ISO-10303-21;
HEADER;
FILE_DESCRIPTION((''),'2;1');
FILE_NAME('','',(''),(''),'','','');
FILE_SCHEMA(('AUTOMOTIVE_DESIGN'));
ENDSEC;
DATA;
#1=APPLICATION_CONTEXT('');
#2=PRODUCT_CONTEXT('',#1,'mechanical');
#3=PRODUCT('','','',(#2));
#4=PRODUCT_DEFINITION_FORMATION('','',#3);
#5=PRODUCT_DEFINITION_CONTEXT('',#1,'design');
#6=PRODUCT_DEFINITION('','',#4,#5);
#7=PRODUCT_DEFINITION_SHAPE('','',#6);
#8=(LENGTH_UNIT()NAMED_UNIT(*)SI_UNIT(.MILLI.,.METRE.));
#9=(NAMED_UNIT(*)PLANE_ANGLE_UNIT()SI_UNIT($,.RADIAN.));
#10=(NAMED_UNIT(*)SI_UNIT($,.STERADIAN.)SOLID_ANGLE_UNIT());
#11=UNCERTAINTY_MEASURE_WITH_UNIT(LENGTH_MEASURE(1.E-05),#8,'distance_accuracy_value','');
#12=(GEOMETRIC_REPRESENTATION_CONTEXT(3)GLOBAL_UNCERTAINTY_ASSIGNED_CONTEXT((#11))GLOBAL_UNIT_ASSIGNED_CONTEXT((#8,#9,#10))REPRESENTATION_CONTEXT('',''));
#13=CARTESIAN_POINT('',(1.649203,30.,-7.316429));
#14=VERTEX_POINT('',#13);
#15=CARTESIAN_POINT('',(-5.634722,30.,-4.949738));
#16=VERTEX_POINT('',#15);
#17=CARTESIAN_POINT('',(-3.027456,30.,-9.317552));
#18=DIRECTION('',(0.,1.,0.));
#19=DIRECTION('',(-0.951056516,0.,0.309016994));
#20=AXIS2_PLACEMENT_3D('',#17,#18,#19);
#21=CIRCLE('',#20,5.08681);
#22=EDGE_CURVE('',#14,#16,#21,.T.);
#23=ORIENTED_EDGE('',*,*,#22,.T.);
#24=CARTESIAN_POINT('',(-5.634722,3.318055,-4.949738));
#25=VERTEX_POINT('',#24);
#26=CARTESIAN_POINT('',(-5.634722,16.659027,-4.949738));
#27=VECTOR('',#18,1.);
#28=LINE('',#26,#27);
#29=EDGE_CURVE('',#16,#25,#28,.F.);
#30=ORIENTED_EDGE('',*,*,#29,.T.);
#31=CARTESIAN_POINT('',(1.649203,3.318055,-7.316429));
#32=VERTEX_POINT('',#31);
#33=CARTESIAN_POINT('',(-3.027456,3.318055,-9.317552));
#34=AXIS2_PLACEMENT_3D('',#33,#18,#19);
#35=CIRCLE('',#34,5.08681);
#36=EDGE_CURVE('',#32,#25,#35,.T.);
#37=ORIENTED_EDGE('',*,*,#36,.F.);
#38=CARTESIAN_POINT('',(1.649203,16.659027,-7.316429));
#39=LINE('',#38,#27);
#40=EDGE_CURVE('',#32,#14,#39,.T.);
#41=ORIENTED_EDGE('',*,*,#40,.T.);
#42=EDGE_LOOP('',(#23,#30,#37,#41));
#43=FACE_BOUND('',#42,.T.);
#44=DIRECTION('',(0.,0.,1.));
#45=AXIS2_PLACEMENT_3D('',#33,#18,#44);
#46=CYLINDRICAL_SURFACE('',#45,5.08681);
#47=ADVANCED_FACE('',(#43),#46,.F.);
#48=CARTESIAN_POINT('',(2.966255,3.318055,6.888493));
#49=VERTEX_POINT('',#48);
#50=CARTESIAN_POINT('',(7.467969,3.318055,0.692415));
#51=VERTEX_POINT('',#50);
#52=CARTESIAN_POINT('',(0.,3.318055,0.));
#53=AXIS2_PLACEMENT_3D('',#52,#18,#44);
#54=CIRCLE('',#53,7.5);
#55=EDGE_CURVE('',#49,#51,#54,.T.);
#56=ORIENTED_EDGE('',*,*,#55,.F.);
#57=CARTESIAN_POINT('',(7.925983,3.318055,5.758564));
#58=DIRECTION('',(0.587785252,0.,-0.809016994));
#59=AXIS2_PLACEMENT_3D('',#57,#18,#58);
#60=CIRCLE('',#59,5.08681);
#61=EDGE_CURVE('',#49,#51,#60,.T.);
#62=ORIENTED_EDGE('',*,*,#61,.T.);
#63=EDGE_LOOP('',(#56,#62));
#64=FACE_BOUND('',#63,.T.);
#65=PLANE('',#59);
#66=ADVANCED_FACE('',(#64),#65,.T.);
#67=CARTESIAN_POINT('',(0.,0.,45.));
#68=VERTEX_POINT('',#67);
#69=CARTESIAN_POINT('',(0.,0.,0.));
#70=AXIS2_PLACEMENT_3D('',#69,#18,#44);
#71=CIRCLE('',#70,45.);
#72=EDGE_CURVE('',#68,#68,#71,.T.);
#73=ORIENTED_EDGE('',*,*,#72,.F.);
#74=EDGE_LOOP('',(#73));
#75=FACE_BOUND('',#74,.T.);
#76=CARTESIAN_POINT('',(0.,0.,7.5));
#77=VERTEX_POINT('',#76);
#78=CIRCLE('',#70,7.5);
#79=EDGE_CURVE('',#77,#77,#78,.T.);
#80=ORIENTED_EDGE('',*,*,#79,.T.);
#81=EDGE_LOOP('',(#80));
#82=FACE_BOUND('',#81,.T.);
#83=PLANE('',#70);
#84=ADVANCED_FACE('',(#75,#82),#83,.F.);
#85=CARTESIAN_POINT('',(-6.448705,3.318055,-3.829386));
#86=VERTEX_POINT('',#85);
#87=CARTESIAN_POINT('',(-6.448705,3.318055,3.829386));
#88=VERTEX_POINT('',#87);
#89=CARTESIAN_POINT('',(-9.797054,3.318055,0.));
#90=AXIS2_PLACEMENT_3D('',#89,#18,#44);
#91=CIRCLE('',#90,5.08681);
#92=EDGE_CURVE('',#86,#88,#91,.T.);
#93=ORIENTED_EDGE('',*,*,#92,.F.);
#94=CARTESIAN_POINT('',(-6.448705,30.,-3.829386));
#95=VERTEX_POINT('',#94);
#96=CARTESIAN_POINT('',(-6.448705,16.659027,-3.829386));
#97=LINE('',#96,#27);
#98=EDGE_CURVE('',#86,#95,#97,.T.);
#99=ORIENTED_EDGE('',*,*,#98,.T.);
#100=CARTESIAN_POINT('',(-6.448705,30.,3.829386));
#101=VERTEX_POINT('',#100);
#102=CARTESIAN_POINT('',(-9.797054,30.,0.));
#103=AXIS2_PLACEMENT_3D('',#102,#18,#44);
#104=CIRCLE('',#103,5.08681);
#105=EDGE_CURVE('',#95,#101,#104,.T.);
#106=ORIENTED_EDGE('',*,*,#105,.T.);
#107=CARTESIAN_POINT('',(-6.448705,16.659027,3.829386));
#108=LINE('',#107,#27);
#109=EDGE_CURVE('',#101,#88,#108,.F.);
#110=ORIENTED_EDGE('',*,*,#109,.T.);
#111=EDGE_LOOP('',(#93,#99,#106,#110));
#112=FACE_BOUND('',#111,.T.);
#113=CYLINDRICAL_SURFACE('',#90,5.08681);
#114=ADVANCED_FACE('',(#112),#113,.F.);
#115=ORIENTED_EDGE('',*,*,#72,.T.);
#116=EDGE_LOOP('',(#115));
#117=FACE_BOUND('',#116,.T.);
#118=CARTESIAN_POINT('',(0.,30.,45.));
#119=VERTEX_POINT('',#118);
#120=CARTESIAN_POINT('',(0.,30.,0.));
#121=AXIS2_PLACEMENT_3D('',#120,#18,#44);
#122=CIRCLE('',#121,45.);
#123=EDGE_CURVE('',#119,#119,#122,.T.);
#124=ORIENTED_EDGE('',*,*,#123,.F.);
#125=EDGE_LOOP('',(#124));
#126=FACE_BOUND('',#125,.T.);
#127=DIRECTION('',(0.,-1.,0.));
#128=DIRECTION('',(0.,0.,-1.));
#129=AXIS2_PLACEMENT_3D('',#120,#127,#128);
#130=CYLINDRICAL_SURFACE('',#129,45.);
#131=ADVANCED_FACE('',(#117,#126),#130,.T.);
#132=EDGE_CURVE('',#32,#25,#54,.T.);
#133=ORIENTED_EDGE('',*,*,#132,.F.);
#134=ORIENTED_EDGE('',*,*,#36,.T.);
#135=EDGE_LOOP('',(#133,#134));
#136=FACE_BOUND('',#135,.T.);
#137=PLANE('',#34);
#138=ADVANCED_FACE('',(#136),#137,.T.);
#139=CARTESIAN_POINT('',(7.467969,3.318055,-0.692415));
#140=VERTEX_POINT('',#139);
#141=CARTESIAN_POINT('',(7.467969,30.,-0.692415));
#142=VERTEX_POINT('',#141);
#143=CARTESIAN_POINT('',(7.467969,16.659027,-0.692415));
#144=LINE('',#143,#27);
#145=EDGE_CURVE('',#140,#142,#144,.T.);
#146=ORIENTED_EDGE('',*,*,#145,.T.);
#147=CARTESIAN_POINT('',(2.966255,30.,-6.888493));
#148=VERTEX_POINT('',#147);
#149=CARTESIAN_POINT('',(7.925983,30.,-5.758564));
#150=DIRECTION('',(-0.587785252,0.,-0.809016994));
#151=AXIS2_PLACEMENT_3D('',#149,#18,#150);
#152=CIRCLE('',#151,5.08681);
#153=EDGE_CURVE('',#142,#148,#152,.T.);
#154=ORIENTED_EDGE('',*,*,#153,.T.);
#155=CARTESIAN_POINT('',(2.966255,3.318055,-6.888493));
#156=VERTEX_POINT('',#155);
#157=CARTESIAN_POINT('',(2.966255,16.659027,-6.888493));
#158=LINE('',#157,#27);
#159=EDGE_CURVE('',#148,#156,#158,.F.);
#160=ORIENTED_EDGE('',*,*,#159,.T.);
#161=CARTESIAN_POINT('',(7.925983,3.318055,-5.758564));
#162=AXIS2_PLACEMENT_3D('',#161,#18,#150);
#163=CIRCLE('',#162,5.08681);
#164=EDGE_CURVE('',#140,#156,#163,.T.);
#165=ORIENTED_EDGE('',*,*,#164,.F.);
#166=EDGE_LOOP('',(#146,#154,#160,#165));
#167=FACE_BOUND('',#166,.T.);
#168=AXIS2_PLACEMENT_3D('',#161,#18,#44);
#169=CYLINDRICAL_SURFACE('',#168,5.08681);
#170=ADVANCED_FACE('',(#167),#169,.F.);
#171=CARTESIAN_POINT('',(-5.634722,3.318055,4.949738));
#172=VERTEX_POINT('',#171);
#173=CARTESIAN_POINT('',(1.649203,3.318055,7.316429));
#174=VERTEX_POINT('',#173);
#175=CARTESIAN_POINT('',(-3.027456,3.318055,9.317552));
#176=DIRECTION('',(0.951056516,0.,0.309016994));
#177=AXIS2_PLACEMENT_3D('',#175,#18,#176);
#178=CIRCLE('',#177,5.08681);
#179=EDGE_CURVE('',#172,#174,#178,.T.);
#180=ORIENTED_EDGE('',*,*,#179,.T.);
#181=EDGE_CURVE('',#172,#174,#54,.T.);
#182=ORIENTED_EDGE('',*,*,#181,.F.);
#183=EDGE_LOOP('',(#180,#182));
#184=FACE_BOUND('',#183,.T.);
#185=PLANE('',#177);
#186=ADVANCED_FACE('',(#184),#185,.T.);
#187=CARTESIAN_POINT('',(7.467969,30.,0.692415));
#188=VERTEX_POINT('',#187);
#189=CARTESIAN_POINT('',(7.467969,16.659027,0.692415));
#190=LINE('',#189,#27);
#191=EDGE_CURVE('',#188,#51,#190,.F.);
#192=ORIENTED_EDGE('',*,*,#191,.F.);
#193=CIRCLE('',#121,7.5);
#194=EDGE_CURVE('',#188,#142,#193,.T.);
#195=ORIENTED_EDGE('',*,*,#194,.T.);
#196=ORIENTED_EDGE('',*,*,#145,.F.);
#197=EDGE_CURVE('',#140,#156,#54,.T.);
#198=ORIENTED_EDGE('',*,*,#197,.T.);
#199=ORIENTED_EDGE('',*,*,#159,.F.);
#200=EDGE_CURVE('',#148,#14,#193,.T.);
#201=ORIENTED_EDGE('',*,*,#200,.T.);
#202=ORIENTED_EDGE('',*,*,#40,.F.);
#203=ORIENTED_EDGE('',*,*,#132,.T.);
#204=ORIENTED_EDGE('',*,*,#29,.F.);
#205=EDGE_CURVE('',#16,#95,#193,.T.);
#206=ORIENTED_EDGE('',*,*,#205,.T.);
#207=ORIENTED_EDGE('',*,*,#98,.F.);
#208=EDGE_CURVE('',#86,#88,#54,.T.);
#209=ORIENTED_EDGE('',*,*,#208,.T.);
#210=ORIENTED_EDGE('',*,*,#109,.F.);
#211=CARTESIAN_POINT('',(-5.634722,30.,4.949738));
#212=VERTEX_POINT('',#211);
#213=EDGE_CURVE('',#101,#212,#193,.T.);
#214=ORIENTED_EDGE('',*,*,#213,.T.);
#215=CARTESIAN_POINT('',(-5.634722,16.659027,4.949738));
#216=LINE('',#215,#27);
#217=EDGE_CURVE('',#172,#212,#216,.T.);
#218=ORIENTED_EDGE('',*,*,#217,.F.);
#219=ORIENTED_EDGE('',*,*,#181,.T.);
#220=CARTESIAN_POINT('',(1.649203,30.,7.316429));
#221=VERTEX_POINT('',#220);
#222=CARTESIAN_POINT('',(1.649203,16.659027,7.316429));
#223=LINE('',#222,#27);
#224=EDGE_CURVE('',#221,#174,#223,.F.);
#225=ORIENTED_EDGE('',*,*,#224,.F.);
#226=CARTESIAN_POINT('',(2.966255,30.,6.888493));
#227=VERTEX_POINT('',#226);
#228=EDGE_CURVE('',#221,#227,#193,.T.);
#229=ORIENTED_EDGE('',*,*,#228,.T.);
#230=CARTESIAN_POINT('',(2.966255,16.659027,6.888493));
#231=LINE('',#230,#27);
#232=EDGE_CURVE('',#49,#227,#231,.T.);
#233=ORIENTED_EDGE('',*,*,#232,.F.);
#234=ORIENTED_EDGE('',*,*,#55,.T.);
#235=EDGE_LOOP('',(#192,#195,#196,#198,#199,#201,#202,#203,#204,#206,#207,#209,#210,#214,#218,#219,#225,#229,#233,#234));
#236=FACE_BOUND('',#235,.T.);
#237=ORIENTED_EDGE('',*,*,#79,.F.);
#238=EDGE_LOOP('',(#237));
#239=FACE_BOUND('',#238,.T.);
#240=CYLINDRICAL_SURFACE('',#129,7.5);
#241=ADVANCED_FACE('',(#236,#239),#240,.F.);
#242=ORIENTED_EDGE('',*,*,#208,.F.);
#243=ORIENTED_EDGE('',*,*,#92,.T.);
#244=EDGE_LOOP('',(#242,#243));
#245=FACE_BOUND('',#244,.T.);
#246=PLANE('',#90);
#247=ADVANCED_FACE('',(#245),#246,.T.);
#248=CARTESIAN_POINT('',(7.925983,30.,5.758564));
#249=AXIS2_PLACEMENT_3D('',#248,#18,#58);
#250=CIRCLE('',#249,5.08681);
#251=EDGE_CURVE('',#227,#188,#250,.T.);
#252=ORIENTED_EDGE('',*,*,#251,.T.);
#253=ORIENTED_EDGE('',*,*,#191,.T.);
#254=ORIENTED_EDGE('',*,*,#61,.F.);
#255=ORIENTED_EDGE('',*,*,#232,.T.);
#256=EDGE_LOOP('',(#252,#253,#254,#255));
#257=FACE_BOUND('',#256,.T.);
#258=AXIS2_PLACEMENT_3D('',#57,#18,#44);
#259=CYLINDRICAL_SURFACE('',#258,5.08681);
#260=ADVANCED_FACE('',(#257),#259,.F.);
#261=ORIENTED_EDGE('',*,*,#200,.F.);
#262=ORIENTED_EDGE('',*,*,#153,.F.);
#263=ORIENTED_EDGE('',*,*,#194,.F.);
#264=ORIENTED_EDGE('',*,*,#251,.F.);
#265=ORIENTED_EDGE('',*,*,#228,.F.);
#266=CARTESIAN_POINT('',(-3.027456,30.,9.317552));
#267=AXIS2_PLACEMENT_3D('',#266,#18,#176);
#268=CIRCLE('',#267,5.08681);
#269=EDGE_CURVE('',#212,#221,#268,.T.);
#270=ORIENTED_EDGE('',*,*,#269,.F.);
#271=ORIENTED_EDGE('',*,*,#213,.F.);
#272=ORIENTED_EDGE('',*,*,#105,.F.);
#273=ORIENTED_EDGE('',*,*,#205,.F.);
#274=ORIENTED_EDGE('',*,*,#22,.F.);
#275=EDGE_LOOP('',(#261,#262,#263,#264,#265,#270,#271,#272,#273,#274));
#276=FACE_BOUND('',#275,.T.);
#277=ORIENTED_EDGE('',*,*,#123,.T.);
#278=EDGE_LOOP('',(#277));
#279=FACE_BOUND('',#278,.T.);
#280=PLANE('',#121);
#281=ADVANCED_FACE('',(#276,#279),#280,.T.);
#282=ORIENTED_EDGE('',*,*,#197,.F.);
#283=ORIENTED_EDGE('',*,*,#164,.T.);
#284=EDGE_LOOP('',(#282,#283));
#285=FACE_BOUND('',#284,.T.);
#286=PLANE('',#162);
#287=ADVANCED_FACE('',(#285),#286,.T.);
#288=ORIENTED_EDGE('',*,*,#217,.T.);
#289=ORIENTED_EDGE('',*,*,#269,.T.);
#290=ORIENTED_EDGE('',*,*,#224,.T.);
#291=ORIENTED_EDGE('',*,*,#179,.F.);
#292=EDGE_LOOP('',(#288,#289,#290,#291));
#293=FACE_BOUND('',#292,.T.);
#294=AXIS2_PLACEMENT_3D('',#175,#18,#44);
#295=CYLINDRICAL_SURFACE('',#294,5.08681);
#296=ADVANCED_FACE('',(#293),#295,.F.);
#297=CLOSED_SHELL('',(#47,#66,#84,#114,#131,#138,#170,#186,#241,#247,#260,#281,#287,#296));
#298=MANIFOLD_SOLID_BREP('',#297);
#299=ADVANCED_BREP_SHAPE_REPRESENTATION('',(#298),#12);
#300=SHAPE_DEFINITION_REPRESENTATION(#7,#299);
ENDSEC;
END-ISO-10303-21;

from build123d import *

# Parameters (mm, degrees)
SKETCH1_R           = 45
BOSS_EXTRUDE1_DEPTH = 30
SKETCH2_R           = 7.5
CUT_EXTRUDE1_DEPTH  = 71.356236397
SKETCH3_R           = 5.086810486
CUT_EXTRUDE2_DEPTH  = 26.681945259
CIRPATTERN1_COUNT   = 5


with BuildPart() as part:
    # Sketch1 → Boss-Extrude1 (new body)
    with BuildSketch(Plane(origin=(0, 0, 0), x_dir=(1, 0, 0), z_dir=(0, 1, 0))):
        Circle(SKETCH1_R)
    extrude(amount=BOSS_EXTRUDE1_DEPTH)

    # Sketch2 → Cut-Extrude1 (cut, through all)
    with BuildSketch(Plane(origin=(0, 0, 0), x_dir=(1, 0, 0), z_dir=(0, 1, 0))):
        Circle(SKETCH2_R)
    extrude(amount=CUT_EXTRUDE1_DEPTH, mode=Mode.SUBTRACT)

    # Sketch3 → Cut-Extrude2 (cut)
    with BuildSketch(Plane(origin=(0, 30, 0), x_dir=(1, 0, 0), z_dir=(0, 1, 0))):
        with Locations((-9.797054354, 0)):
            Circle(SKETCH3_R)
    cut_extrude2 = extrude(amount=-CUT_EXTRUDE2_DEPTH, mode=Mode.SUBTRACT)

    # CirPattern1: Cut-Extrude2 ×5 about axis
    cirpattern1_axis = Axis((0, 0, 0), (0, 1, 0))
    for i in range(1, CIRPATTERN1_COUNT):
        add(cut_extrude2.rotate(cirpattern1_axis, i * 360 / CIRPATTERN1_COUNT), mode=Mode.SUBTRACT)


solid = part.part
